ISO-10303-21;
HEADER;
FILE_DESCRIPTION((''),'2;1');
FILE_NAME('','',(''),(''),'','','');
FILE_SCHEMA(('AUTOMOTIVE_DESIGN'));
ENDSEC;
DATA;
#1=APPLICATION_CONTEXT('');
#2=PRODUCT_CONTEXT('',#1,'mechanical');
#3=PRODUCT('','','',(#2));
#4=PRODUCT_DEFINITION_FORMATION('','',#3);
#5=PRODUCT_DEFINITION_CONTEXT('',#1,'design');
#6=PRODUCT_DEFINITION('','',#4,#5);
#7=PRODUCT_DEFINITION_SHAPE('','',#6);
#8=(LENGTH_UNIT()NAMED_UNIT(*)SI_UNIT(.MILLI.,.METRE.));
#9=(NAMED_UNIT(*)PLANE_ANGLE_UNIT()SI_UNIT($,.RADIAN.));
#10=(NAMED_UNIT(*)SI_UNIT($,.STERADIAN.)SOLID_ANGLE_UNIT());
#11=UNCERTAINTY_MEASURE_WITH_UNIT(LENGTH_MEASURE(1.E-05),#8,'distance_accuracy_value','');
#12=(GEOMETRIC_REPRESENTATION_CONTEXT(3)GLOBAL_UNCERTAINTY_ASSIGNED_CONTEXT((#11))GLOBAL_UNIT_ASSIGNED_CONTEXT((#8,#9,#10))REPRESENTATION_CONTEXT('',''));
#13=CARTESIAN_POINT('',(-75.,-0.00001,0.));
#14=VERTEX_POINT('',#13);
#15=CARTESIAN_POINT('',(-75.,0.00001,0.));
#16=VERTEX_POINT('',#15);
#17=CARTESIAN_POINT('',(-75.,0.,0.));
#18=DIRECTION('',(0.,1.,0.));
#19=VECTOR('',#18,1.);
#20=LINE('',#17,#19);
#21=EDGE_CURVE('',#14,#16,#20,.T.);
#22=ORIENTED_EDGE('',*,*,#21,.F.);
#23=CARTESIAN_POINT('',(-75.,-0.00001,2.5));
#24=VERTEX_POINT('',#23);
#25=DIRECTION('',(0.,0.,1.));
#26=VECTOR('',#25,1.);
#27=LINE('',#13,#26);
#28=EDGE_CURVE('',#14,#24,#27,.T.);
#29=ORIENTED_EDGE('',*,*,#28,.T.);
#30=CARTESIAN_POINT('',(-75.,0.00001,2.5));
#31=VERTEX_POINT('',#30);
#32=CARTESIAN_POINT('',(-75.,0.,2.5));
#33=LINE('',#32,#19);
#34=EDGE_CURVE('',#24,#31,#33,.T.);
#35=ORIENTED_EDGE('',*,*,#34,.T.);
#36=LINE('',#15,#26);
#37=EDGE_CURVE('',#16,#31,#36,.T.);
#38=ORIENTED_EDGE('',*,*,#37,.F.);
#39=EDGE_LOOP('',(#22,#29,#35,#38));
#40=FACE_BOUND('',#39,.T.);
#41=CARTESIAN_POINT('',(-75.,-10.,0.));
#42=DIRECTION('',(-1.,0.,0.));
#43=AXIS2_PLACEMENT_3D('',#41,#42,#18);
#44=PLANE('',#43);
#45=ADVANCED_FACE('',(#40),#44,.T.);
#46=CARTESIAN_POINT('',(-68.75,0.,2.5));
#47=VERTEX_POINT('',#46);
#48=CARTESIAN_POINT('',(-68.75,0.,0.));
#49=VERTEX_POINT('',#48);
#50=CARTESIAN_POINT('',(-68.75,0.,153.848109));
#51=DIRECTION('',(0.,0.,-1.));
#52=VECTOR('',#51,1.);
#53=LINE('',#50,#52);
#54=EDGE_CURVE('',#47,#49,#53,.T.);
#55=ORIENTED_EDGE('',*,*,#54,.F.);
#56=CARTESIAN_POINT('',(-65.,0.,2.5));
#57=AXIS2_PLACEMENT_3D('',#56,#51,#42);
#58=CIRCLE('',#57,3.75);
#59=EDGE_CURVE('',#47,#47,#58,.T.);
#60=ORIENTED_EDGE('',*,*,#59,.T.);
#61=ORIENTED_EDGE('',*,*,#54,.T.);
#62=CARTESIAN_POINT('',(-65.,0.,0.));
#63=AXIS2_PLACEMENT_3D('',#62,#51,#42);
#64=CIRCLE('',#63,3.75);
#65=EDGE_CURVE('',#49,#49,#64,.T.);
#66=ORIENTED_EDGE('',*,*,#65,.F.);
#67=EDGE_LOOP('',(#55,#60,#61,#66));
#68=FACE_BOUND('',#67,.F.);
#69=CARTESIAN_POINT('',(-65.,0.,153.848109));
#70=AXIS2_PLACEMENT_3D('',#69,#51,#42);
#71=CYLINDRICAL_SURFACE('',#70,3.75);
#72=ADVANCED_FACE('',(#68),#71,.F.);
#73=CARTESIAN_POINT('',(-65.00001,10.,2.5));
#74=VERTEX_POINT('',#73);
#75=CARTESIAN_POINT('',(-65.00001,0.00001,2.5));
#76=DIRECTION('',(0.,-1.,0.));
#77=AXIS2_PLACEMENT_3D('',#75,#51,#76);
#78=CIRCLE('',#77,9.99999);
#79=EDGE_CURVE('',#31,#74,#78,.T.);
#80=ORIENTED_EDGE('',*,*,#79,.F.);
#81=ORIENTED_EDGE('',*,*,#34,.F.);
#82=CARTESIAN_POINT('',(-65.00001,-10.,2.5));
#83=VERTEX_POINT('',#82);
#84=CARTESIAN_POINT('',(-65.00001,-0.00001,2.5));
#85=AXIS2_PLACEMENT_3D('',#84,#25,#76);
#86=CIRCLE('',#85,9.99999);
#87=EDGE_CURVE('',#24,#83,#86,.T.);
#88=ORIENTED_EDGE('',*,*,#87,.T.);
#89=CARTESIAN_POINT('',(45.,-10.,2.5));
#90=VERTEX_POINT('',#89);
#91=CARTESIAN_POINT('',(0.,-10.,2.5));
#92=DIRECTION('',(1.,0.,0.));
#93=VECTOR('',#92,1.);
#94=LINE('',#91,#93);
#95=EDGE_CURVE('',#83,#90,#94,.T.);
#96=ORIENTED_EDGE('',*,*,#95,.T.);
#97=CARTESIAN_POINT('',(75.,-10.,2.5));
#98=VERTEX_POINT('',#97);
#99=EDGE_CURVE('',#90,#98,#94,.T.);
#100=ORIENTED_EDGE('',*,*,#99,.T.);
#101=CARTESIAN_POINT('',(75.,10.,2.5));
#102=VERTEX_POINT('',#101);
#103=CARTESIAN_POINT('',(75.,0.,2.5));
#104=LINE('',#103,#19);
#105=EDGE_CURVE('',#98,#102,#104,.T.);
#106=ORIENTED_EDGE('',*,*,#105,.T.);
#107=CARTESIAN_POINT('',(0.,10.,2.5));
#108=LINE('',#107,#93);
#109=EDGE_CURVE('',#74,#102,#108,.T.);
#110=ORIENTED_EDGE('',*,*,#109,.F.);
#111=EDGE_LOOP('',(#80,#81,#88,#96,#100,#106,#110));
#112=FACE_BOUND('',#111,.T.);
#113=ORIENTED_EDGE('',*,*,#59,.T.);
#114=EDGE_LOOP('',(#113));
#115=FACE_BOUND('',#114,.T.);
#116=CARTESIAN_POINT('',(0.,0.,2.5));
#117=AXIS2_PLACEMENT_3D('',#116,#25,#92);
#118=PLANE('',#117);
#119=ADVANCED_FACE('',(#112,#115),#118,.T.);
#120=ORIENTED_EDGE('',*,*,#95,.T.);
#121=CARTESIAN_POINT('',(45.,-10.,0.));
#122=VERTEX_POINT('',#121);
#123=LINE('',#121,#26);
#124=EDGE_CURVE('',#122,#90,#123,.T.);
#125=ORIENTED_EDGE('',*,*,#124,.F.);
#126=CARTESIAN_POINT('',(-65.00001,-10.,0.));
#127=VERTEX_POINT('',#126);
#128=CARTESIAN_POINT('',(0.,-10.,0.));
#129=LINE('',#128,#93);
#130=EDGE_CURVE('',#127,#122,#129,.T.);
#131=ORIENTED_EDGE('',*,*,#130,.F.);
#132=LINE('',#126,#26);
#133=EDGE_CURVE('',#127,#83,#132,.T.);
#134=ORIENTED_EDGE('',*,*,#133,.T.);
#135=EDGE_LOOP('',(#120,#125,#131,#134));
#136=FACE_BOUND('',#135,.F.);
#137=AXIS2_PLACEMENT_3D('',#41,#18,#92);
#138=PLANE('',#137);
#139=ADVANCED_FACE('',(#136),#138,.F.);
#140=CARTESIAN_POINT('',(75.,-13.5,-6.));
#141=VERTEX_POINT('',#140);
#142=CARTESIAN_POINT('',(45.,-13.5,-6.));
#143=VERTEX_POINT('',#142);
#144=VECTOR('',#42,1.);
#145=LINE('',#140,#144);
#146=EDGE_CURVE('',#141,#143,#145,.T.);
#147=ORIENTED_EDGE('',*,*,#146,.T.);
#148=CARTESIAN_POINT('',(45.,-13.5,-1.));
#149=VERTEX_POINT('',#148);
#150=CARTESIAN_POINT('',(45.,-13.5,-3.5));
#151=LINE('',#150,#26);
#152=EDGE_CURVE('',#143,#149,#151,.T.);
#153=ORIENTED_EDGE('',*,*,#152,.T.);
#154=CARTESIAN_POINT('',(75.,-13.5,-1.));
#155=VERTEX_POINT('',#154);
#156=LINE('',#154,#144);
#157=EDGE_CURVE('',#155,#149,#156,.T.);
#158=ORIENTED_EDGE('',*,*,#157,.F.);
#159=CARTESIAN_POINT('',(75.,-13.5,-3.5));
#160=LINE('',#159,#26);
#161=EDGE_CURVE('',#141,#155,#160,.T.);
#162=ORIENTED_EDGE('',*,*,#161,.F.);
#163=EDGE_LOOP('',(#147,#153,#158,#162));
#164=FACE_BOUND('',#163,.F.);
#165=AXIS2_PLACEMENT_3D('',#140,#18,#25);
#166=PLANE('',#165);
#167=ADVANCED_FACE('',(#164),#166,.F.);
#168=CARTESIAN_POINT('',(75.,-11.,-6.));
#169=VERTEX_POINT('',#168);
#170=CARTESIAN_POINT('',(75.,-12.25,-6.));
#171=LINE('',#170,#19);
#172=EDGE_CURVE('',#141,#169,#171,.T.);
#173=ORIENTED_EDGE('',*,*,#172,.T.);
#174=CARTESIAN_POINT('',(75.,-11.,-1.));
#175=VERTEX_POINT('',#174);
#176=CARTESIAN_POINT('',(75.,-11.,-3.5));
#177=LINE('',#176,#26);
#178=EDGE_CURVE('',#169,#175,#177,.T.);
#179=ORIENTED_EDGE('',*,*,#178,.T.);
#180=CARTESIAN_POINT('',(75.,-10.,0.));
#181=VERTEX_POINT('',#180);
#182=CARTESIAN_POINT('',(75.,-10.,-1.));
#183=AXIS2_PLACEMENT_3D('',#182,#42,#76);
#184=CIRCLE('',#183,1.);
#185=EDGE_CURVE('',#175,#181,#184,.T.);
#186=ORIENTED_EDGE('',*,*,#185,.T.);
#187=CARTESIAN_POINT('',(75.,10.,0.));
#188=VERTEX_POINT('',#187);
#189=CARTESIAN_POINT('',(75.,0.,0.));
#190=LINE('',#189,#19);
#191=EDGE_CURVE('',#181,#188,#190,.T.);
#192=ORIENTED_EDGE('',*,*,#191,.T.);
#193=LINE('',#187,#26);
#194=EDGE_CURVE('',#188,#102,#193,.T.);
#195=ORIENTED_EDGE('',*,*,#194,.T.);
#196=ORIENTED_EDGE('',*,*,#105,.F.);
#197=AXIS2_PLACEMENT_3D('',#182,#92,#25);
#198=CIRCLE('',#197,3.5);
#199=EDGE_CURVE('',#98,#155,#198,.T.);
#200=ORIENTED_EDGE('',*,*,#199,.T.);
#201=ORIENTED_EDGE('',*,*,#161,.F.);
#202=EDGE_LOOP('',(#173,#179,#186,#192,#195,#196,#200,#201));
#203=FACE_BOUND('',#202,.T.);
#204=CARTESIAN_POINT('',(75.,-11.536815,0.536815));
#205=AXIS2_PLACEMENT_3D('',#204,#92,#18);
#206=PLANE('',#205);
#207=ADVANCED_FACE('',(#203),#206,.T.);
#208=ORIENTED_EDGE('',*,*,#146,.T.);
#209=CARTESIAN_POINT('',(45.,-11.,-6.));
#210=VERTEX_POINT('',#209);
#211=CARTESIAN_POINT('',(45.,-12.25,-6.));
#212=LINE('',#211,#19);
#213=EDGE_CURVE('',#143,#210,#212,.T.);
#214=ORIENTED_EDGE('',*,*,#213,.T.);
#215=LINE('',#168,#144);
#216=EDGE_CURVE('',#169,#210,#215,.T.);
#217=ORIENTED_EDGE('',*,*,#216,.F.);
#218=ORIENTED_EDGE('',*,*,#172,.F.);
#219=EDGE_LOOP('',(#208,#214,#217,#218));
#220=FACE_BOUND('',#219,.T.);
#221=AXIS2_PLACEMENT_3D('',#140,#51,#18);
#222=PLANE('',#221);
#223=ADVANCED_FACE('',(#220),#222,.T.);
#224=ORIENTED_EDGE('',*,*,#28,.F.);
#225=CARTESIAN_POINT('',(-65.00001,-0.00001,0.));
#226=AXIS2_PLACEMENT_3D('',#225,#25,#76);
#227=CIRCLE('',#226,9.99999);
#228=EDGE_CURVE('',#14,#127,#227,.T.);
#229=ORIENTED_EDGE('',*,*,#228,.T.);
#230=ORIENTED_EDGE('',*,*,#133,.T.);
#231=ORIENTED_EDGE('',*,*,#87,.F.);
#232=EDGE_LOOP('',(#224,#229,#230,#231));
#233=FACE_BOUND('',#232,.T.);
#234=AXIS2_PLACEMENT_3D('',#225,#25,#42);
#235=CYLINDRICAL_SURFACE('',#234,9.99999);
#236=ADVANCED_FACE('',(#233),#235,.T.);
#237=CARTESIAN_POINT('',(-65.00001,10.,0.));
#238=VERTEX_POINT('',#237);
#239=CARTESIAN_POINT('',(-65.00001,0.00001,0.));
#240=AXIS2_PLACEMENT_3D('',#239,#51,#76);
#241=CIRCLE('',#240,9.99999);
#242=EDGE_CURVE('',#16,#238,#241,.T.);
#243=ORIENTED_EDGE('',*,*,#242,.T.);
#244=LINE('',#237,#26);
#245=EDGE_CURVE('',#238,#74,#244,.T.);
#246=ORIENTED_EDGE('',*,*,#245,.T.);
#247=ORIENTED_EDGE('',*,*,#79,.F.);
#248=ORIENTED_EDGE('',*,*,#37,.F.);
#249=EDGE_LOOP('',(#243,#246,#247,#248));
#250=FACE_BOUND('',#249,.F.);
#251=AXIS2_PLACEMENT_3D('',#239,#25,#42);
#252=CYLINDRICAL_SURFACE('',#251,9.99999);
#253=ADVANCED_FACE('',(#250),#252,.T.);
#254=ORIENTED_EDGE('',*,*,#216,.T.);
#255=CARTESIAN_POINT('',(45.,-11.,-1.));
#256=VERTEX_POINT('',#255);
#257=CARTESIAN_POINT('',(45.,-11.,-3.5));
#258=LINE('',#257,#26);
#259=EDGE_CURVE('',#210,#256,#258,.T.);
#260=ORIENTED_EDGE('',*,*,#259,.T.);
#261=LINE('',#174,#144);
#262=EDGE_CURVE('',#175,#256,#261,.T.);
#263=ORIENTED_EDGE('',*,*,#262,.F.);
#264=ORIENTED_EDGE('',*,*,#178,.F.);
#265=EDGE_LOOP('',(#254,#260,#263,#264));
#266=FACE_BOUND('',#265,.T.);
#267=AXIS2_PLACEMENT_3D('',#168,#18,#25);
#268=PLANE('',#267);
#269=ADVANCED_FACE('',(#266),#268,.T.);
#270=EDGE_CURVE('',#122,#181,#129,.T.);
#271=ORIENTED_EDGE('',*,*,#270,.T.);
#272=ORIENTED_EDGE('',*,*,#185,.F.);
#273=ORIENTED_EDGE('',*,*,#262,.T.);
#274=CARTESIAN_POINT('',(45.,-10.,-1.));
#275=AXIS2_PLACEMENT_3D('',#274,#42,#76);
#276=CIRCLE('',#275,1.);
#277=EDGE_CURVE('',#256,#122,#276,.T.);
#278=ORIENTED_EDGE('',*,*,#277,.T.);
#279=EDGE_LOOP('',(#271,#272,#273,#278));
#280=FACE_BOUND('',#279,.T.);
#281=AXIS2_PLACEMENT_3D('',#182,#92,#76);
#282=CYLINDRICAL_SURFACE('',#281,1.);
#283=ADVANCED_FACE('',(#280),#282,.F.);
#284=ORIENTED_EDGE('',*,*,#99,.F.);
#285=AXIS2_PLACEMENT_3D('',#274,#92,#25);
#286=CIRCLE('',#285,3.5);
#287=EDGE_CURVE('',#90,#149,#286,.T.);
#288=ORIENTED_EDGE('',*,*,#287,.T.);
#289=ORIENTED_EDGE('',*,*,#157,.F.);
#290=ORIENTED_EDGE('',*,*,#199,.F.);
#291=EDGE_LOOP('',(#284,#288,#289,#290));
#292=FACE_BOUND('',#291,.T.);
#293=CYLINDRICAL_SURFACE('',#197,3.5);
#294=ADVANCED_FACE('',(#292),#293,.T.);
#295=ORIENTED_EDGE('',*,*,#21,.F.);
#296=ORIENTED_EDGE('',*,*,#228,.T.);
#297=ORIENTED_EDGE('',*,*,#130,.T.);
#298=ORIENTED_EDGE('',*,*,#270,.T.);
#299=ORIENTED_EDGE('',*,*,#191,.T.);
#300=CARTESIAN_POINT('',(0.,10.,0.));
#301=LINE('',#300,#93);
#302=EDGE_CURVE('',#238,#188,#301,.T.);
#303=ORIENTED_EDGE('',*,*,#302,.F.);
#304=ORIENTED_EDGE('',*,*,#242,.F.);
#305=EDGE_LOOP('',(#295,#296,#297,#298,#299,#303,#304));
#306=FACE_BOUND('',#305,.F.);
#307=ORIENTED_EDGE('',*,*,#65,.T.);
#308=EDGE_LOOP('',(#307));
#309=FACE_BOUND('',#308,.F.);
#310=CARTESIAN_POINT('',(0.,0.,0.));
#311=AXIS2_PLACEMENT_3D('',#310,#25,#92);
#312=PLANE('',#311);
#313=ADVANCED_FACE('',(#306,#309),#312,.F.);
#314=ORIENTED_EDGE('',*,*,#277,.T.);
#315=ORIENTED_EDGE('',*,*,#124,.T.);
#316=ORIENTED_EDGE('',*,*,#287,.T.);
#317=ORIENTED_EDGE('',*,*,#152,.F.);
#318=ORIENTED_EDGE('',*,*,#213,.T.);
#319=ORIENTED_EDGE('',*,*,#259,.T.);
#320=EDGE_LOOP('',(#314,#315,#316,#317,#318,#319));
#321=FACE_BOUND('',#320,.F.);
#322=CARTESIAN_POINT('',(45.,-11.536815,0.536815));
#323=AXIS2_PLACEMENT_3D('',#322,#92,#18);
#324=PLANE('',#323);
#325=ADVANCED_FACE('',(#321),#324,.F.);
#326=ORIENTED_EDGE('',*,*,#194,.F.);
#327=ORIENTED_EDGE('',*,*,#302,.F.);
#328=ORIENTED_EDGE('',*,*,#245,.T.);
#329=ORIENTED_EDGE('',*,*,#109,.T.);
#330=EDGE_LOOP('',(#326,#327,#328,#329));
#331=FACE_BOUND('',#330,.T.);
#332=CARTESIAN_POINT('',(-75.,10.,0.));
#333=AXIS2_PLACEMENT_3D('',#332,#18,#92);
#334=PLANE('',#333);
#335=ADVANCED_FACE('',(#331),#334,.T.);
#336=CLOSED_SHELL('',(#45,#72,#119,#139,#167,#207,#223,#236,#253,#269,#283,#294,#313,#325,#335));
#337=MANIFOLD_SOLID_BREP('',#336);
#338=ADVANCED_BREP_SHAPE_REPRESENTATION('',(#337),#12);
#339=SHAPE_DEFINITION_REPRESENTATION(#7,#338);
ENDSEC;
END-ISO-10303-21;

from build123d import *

# Parameters (mm, degrees)
F0_W     = 150
F0_H     = 20
F1_DEPTH = 2.5
F3_D     = 7.5
F4_R     = 9.99999
F5_W     = 2.5
F5_H     = 5
F6_DEPTH = 30


# Not quite as in the source:
# - a fillet or chamfer is up to 0.001 mm smaller than in the source, because OpenCascade refuses the exact size


with BuildPart() as f1:
    # F0 (on Top) → F1 (new body)
    with BuildSketch(Plane.XY):
        Rectangle(F0_W, F0_H)
    extrude(amount=F1_DEPTH)

    # F3 (through all)
    with Locations(Plane.XY.offset(2.5)):
        with Locations((-65, 0)):
            Hole(F3_D / 2)

    # F4 (radius 10 in the source; OpenCascade refuses exactly that, so slightly less here)
    f4_edges = [f1.edges().sort_by_distance(p)[0] for p in [
        (-75, -10, 1.25),
        (-75, 10, 1.25),
    ]]
    fillet(f4_edges, radius=F4_R)

    # F5 (on face) → F6 (join)
    with BuildSketch(Plane.YZ.offset(75)):
        with BuildLine():
            Line((-10, 0), (-10, 2.5))
            ThreePointArc((-10, 2.5), (-12.4748737342, 1.4748737342), (-13.5, -1))
            Line((-13.5, -1), (-11, -1))
            ThreePointArc((-11, -1), (-10.7071067812, -0.2928932188), (-10, 0))
        make_face()
        with Locations((-12.25, -3.5)):
            Rectangle(F5_W, F5_H)
    extrude(amount=-F6_DEPTH)


solid = f1.part
